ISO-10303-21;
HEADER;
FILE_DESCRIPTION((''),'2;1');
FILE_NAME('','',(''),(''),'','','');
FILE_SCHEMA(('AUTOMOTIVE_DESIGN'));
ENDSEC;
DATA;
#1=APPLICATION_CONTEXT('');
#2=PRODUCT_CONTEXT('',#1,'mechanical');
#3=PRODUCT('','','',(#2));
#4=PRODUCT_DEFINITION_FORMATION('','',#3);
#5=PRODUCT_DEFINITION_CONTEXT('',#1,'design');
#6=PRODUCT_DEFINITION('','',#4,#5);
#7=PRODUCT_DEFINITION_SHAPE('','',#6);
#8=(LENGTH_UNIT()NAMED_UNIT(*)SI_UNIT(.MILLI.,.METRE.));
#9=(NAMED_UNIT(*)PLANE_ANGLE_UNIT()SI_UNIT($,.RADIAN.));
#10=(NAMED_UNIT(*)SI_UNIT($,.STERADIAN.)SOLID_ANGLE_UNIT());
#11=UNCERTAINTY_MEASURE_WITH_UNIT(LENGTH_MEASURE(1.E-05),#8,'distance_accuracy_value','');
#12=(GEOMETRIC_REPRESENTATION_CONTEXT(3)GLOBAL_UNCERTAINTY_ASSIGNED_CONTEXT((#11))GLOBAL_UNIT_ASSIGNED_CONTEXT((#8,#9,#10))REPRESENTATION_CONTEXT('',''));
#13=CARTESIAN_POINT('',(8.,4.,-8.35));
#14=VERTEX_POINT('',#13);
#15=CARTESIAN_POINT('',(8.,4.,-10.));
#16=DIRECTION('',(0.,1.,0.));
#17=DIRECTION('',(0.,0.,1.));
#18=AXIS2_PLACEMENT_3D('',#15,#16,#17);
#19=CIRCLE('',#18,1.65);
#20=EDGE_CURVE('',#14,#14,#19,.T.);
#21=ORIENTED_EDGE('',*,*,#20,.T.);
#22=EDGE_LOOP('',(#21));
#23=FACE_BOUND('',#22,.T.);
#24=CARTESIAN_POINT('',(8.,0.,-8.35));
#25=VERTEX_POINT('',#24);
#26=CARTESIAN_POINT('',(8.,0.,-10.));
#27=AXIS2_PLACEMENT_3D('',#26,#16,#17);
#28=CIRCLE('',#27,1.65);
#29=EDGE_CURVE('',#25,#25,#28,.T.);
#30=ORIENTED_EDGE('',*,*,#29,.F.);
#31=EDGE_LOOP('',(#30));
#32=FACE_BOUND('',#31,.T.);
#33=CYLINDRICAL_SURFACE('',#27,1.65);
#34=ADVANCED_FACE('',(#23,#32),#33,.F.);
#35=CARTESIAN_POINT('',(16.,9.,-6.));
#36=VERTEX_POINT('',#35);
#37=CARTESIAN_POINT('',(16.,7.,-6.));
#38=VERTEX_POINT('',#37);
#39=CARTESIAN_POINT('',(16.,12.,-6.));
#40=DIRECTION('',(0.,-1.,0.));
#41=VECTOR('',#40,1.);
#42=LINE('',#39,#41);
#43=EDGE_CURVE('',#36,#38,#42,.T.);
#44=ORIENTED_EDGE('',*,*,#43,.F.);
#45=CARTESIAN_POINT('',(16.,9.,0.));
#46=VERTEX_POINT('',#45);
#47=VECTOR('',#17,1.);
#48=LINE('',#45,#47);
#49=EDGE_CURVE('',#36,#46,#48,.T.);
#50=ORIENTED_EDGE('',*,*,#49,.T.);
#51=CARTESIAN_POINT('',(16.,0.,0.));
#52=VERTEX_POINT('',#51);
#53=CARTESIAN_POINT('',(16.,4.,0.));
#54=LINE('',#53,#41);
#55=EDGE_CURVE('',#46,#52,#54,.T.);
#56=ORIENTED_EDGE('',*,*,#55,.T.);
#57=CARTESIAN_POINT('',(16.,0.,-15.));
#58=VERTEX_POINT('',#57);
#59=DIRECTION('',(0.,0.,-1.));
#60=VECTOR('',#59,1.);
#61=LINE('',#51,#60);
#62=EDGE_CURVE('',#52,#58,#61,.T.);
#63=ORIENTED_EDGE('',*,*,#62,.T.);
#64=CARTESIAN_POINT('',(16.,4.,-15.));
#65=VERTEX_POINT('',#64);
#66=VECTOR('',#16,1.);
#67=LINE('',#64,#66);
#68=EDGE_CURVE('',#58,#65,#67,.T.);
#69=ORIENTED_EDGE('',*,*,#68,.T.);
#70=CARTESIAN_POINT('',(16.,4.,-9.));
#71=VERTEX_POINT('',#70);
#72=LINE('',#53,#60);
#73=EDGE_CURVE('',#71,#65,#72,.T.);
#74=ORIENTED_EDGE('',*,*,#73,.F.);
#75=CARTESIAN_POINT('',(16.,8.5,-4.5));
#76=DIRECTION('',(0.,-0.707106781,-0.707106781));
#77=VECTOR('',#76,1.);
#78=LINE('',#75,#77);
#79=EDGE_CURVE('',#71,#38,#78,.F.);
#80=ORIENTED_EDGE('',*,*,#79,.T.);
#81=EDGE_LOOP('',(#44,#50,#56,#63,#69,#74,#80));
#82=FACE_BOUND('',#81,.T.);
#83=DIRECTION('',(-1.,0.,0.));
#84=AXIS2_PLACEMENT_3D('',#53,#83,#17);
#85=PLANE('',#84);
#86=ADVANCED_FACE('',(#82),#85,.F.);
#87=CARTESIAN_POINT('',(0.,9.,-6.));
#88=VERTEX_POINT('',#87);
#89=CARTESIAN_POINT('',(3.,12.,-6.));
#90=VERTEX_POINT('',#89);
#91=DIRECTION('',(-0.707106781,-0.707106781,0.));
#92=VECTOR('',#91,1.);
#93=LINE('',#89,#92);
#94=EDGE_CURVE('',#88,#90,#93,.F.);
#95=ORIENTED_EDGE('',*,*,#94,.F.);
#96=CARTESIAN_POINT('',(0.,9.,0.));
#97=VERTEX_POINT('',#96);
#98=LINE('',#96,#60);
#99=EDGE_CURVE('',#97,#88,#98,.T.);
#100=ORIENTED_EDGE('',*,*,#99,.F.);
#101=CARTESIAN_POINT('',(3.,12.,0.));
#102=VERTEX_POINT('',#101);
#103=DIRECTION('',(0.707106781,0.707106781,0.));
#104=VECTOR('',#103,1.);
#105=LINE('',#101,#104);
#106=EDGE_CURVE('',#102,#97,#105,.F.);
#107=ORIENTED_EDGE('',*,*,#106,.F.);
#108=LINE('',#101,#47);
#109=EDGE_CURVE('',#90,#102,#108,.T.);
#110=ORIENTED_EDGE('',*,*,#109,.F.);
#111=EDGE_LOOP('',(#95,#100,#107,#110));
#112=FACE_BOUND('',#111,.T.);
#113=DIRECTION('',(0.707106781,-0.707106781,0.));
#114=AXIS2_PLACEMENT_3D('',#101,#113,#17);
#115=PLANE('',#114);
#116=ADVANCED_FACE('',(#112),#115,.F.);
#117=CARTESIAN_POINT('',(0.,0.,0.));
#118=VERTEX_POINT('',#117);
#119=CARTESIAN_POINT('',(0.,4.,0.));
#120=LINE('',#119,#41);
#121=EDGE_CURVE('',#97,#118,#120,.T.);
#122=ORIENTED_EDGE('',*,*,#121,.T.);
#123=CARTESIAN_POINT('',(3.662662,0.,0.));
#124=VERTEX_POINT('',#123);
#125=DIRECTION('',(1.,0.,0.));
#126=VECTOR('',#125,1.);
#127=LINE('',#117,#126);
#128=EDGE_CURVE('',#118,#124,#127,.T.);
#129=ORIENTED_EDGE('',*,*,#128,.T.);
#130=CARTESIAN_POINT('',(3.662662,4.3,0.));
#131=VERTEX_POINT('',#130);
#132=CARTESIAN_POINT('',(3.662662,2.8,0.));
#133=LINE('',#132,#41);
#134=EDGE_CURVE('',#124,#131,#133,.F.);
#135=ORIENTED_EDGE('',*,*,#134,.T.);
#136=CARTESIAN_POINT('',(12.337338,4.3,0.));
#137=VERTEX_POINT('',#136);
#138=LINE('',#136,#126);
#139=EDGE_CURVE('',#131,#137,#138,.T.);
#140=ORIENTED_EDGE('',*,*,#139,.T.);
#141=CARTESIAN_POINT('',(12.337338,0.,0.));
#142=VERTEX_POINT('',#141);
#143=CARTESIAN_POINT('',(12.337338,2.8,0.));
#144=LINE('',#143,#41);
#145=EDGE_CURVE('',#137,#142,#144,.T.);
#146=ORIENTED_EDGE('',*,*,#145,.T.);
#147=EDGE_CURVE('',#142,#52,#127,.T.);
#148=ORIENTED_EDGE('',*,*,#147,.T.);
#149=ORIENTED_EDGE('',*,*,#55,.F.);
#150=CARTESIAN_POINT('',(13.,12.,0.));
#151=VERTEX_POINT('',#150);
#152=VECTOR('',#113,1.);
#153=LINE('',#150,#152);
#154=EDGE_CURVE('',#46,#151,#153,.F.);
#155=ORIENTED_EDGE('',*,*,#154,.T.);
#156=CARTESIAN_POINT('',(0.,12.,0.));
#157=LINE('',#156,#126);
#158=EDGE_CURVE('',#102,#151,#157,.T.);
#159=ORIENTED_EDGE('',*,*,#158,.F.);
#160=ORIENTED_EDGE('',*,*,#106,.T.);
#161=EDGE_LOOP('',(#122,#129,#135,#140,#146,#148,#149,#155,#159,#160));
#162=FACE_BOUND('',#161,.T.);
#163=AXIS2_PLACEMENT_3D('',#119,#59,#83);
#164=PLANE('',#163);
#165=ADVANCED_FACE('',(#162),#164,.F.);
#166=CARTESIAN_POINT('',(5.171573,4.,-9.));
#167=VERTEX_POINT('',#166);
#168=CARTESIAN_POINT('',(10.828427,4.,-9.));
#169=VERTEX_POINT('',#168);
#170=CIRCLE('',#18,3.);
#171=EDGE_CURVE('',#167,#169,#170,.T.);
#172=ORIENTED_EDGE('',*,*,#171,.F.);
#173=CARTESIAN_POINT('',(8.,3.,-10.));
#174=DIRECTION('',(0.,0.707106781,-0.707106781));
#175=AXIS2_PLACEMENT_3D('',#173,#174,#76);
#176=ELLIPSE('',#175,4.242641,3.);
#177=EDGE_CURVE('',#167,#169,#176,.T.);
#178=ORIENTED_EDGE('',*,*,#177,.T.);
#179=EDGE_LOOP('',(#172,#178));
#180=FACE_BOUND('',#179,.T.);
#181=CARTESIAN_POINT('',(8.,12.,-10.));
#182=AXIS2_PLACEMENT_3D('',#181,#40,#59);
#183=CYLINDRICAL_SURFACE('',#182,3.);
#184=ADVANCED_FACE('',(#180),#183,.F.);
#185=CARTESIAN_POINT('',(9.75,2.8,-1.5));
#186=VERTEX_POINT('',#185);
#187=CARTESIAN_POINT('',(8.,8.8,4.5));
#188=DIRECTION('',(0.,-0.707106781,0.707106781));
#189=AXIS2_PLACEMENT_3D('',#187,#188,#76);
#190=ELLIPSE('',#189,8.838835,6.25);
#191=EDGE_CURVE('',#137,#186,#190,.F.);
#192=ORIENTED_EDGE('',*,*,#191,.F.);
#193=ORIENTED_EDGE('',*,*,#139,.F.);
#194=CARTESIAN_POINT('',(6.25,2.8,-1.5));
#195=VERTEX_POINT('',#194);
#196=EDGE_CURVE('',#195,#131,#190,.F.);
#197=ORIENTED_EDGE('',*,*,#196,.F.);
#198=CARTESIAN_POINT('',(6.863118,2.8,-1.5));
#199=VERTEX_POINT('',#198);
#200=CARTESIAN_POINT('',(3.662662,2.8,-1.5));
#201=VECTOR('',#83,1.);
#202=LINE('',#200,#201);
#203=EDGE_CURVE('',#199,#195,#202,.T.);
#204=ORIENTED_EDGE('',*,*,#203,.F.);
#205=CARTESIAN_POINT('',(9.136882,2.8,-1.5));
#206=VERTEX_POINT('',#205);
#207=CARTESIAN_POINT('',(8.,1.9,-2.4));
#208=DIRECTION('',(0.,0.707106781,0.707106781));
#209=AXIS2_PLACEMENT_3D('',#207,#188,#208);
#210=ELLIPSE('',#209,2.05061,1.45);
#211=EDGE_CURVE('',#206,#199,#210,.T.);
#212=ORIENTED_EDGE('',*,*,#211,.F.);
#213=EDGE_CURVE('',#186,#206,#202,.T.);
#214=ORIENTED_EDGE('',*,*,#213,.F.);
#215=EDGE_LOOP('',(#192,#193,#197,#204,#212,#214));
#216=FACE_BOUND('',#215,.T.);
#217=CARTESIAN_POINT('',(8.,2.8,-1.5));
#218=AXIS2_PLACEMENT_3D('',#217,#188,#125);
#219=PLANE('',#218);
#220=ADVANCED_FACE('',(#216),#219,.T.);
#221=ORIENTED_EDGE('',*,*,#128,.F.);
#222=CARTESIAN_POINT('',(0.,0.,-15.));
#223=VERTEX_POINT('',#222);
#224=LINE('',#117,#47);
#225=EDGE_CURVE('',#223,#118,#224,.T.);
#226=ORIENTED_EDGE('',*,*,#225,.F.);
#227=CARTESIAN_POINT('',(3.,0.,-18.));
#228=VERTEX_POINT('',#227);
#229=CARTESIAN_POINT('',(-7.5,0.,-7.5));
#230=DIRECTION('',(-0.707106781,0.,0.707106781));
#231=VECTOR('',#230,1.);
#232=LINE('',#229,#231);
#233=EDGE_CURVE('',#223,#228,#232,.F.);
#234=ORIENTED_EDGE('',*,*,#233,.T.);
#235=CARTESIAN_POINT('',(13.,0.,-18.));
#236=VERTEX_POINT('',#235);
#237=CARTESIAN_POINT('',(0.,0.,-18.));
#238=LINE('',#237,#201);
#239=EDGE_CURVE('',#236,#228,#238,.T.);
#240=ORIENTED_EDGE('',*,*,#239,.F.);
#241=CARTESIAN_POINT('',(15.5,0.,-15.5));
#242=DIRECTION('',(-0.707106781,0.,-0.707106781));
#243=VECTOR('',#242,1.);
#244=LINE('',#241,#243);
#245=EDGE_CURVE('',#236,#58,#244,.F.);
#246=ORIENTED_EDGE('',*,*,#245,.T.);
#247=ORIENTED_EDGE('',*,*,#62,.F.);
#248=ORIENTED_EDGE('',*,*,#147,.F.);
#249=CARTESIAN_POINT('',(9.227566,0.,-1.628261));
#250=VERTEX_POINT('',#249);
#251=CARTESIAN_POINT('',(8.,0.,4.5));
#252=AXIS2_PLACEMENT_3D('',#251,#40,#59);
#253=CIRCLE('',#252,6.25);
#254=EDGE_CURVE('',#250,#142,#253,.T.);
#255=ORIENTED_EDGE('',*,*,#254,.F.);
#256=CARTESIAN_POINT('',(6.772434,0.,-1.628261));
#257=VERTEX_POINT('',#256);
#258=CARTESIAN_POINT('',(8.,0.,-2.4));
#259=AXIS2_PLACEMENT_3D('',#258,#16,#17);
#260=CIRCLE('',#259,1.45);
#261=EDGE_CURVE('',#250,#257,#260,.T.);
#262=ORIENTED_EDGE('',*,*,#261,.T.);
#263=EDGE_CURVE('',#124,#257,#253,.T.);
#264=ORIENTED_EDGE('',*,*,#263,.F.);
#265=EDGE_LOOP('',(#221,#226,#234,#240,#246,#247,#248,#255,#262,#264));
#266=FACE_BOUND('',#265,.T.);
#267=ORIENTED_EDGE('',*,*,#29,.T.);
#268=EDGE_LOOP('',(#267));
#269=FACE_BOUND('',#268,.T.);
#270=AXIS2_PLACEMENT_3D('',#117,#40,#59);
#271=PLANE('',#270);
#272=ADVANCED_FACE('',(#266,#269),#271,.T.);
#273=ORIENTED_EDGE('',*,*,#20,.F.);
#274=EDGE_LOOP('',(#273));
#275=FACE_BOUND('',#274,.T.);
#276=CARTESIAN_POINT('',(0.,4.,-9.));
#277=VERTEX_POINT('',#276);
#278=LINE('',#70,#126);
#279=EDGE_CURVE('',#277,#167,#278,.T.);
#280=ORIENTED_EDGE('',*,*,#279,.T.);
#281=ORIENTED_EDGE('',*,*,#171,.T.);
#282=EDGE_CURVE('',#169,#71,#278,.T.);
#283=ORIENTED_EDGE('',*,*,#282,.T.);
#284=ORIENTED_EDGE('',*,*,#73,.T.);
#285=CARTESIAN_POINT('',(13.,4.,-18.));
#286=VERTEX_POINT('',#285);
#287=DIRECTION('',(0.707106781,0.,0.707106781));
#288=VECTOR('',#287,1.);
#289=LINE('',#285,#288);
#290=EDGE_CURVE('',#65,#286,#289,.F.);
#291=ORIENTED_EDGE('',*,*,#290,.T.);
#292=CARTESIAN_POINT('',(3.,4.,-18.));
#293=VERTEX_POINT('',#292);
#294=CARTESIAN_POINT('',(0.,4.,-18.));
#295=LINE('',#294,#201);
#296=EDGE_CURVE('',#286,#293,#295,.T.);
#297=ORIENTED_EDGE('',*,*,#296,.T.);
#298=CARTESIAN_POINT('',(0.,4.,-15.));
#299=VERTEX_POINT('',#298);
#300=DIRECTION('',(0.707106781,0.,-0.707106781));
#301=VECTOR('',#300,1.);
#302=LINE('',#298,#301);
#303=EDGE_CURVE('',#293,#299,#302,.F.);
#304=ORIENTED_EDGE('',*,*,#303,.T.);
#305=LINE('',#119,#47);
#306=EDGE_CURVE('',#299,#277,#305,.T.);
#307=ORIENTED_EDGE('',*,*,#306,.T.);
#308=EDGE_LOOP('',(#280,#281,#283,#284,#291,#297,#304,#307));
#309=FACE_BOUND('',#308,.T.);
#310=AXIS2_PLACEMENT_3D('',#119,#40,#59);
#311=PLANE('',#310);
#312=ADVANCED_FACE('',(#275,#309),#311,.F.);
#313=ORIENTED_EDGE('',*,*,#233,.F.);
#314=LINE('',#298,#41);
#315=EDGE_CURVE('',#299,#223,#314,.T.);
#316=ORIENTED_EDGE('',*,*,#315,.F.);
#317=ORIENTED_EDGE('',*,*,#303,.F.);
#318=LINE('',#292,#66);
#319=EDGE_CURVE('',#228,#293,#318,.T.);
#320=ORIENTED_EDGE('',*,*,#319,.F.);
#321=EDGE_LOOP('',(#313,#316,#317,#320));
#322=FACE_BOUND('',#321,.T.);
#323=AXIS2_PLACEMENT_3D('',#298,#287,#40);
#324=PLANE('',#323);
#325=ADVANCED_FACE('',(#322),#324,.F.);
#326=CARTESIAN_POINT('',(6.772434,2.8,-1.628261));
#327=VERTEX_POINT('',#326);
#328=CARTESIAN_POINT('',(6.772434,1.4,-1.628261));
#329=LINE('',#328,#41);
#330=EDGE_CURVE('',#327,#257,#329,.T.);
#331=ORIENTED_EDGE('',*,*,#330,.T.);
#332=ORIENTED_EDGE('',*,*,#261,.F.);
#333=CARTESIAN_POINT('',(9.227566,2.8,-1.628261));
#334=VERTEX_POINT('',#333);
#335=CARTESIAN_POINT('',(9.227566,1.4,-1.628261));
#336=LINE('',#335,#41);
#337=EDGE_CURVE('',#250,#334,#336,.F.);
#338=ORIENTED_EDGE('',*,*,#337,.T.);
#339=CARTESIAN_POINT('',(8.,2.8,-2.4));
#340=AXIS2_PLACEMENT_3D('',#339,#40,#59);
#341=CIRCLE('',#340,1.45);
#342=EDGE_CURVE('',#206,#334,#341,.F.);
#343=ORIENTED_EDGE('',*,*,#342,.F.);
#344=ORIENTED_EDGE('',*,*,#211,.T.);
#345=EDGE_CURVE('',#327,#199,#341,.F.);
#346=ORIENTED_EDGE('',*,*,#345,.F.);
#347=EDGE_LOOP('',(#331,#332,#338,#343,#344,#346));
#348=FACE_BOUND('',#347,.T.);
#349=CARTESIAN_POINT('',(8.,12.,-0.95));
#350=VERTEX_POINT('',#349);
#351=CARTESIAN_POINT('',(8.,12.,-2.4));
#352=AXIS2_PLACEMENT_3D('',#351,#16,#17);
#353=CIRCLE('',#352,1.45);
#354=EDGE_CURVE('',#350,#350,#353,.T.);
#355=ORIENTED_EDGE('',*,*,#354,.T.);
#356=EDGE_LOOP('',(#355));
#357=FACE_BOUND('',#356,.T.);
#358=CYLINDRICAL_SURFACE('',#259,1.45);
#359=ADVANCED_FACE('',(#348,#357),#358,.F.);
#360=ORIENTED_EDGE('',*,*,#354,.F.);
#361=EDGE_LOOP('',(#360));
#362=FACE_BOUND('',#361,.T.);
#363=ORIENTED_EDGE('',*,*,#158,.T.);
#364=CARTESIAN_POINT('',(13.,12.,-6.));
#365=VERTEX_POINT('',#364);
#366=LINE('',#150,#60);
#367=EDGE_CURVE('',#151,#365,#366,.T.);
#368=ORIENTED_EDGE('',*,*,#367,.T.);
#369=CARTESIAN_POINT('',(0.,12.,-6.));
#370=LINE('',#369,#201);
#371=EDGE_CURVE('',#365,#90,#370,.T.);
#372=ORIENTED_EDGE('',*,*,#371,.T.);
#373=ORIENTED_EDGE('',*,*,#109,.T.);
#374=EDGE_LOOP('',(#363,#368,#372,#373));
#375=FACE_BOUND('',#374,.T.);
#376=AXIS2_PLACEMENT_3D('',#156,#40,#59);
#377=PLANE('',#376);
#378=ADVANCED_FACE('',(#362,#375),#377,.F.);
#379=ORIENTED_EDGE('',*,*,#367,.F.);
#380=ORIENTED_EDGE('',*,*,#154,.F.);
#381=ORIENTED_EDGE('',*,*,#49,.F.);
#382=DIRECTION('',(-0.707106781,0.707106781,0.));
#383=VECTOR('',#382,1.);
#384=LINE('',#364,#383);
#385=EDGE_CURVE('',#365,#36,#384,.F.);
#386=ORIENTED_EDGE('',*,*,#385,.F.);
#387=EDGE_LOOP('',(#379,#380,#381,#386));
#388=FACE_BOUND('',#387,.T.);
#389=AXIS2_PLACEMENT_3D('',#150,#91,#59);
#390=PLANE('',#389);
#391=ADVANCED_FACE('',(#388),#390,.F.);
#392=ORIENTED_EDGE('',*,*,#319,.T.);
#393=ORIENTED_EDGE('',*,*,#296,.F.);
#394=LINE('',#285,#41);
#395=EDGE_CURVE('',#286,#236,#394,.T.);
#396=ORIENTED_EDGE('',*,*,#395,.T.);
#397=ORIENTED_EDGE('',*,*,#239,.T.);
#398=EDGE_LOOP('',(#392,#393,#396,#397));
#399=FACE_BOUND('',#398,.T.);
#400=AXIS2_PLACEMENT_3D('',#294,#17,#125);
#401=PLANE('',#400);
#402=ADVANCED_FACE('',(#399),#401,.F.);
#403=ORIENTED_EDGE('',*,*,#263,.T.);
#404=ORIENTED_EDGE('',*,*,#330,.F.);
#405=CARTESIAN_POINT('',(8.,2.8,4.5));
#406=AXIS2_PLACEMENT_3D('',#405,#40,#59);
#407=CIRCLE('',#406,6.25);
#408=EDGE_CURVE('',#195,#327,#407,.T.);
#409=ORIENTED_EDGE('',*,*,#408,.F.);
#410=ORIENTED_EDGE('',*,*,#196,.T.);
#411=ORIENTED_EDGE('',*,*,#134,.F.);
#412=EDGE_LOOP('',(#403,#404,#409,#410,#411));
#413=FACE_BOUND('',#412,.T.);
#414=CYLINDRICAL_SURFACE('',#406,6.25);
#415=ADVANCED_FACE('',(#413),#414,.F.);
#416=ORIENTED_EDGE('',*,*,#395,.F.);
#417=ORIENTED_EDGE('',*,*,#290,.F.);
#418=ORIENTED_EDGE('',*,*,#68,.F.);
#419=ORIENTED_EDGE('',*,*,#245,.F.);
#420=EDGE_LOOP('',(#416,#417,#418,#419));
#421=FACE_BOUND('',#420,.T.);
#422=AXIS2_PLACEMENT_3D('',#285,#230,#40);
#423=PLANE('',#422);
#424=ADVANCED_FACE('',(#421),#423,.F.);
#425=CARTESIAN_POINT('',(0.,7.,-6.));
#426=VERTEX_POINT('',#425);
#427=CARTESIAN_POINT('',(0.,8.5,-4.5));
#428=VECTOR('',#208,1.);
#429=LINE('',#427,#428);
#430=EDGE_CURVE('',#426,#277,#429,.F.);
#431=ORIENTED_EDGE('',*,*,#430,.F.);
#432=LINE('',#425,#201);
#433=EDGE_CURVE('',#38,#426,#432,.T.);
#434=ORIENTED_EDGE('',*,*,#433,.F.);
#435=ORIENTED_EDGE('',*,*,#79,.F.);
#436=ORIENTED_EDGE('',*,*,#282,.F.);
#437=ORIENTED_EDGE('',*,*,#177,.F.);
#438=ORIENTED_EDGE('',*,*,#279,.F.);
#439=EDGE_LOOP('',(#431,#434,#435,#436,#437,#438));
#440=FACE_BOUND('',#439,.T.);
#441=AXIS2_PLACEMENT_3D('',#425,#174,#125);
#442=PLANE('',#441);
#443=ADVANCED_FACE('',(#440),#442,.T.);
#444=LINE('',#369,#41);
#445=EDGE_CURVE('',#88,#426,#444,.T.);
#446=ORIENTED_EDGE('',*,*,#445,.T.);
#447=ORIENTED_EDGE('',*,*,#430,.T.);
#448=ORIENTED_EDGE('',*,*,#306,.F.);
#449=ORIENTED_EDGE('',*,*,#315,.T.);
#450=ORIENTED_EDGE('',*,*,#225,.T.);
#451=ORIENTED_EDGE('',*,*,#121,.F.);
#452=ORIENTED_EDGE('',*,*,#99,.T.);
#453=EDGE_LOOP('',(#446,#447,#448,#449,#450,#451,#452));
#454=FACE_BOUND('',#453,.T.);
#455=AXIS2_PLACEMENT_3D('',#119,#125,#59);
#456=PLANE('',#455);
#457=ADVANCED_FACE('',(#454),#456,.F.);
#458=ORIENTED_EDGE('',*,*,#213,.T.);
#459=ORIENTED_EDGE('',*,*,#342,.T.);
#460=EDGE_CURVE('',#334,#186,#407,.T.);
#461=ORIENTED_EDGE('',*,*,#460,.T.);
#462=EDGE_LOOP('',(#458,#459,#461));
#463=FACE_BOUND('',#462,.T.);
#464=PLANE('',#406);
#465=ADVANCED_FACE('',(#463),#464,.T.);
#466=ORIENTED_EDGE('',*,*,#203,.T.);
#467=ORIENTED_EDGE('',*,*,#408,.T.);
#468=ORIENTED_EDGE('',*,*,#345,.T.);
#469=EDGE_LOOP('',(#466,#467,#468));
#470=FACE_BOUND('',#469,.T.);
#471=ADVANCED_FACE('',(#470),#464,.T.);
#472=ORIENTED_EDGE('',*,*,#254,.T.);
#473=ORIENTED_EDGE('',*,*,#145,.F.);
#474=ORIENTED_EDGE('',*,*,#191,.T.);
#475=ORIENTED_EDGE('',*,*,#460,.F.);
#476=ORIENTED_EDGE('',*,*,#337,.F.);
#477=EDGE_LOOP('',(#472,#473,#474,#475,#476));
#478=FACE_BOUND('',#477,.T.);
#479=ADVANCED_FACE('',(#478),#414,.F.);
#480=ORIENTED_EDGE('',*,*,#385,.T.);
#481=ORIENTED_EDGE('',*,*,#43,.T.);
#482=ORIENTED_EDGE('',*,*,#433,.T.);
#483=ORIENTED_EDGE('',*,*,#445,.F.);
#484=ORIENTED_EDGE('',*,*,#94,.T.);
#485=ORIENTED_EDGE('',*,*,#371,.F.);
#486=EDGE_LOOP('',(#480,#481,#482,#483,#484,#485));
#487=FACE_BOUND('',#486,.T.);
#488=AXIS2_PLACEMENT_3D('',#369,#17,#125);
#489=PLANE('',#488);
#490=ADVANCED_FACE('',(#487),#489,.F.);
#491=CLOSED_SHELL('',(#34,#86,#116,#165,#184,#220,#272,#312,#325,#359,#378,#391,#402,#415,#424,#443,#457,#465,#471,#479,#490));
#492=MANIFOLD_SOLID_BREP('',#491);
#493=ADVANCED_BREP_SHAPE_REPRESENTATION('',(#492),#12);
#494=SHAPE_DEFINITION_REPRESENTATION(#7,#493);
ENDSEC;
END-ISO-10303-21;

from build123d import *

# Parameters (mm, degrees)
SKETCH_1_W          = 16
SKETCH_1_H          = 18
EXTRUDE_1_DEPTH     = 4
SKETCH_2_R          = 1.65
CUT_EXTRUDE_1_DEPTH = 4
SKETCH_3_W          = 16
SKETCH_3_H          = 6
EXTRUDE_2_DEPTH     = 8
SKETCH_4_R          = 1.45
CUT_EXTRUDE_2_DEPTH = 27.907248094
CHAMFER_1_SIZE      = 3
CHAMFER_2_SIZE      = 3
CHAMFER_3_SIZE      = 3
SKETCH_6_R          = 3
CUT_EXTRUDE_3_DEPTH = 26.377155081
SKETCH_7_R          = 6.25
CUT_EXTRUDE_4_DEPTH = 2.8
CHAMFER_4_SIZE      = 1.5


with BuildPart() as part:
    # 草图1 → 凸台-拉伸1 (new body)
    with BuildSketch(Plane(origin=(0, 0, 0), x_dir=(1, 0, 0), z_dir=(0, 1, 0))):
        with Locations((8, 9)):
            Rectangle(SKETCH_1_W, SKETCH_1_H)
    extrude(amount=EXTRUDE_1_DEPTH)

    # 草图2 → 切除-拉伸1 (cut)
    with BuildSketch(Plane(origin=(0, 4, 0), x_dir=(1, 0, 0), z_dir=(0, 1, 0))):
        with Locations(Location((8, 10, 0), (0, 0, 270))):
            Circle(SKETCH_2_R)
    extrude(amount=-CUT_EXTRUDE_1_DEPTH, mode=Mode.SUBTRACT)

    # 草图3 → 凸台-拉伸2 (add)
    with BuildSketch(Plane(origin=(0, 4, 0), x_dir=(1, 0, 0), z_dir=(0, 1, 0))):
        with Locations((8, 3)):
            Rectangle(SKETCH_3_W, SKETCH_3_H)
    extrude(amount=EXTRUDE_2_DEPTH)

    # 草图4 → 切除-拉伸2 (cut, through all)
    with BuildSketch(Plane(origin=(0, 12, 0), x_dir=(1, 0, 0), z_dir=(0, 1, 0))):
        with Locations(Location((8, 2.4, 0), (0, 0, 270))):
            Circle(SKETCH_4_R)
    extrude(amount=-CUT_EXTRUDE_2_DEPTH, mode=Mode.SUBTRACT)

    # 倒角1
    chamfer_1_edges = [part.edges().sort_by_distance(p)[0] for p in [
        (0, 2, -18),
        (16, 2, -18),
    ]]
    chamfer(chamfer_1_edges, length=CHAMFER_1_SIZE)

    # 倒角2
    # the kernel refuses this chamfer: 3 mm, written as the material it adds along each edge
    with BuildSketch(Plane(origin=(16, 4, -6), x_dir=(0, -0.02749587661058635, -0.9996219169112968), z_dir=(-1, 0, 0))) as chamfer_2_piece_1_section:
        Polygon((CHAMFER_2_SIZE * 0.999621916911, -CHAMFER_2_SIZE * 0.0274958766106), (-CHAMFER_2_SIZE * 0.0274958766106, -CHAMFER_2_SIZE * 0.999621916911), (0, 0), align=None)
    chamfer_2_piece_1 = extrude(amount=16, mode=Mode.PRIVATE)
    chamfer_2_piece_1 = chamfer_2_piece_1 - Plane(origin=(8, 4.994786575, -10), x_dir=(0, 0, 1), z_dir=(0, 1, 0)) * Cylinder(1.65, 44, mode=Mode.PRIVATE)
    add(chamfer_2_piece_1)

    # 倒角3
    chamfer_3_edges = [part.edges().sort_by_distance(p)[0] for p in [
        (0, 12, -3),
        (16, 12, -3),
    ]]
    chamfer(chamfer_3_edges, length=CHAMFER_3_SIZE)

    # 草图6 → 切除-拉伸3 (cut, through all)
    with BuildSketch(Plane(origin=(0, 4, 0), x_dir=(1, 0, 0), z_dir=(0, 1, 0))):
        with Locations((8, 10)):
            Circle(SKETCH_6_R)
    extrude(amount=CUT_EXTRUDE_3_DEPTH, mode=Mode.SUBTRACT)

    # 草图7 → 切除-拉伸4 (cut)
    with BuildSketch(Plane(origin=(0, 0, 0), x_dir=(-1, 0, 0), z_dir=(0, -1, 0))):
        with Locations((-8, -4.5)):
            Circle(SKETCH_7_R)
    extrude(amount=-CUT_EXTRUDE_4_DEPTH, mode=Mode.SUBTRACT)

    # 倒角4
    # the kernel refuses this chamfer: 1.5 mm, written as the material it takes off along each edge
    with BuildSketch(Plane(origin=(16.194862375, 2.8, 0), x_dir=(0, 0.9996219169112969, 0.027495876610586382), z_dir=(-1, 0, 0))) as chamfer_4_piece_1_section:
        Polygon((CHAMFER_4_SIZE * 0.999621916911, CHAMFER_4_SIZE * 0.0274958766106), (-CHAMFER_4_SIZE * 0.0274958766106, CHAMFER_4_SIZE * 0.999621916911), (0, 0), align=None)
    chamfer_4_piece_1 = extrude(amount=16.38972475, mode=Mode.PRIVATE)
    chamfer_4_piece_1 = chamfer_4_piece_1 & Plane(origin=(8, 3.325118299, 4.5), x_dir=(-1, 0, 0), z_dir=(0, -1, 0)) * Cylinder(6.25, 39, mode=Mode.PRIVATE)
    add(chamfer_4_piece_1, mode=Mode.SUBTRACT)


solid = part.part
